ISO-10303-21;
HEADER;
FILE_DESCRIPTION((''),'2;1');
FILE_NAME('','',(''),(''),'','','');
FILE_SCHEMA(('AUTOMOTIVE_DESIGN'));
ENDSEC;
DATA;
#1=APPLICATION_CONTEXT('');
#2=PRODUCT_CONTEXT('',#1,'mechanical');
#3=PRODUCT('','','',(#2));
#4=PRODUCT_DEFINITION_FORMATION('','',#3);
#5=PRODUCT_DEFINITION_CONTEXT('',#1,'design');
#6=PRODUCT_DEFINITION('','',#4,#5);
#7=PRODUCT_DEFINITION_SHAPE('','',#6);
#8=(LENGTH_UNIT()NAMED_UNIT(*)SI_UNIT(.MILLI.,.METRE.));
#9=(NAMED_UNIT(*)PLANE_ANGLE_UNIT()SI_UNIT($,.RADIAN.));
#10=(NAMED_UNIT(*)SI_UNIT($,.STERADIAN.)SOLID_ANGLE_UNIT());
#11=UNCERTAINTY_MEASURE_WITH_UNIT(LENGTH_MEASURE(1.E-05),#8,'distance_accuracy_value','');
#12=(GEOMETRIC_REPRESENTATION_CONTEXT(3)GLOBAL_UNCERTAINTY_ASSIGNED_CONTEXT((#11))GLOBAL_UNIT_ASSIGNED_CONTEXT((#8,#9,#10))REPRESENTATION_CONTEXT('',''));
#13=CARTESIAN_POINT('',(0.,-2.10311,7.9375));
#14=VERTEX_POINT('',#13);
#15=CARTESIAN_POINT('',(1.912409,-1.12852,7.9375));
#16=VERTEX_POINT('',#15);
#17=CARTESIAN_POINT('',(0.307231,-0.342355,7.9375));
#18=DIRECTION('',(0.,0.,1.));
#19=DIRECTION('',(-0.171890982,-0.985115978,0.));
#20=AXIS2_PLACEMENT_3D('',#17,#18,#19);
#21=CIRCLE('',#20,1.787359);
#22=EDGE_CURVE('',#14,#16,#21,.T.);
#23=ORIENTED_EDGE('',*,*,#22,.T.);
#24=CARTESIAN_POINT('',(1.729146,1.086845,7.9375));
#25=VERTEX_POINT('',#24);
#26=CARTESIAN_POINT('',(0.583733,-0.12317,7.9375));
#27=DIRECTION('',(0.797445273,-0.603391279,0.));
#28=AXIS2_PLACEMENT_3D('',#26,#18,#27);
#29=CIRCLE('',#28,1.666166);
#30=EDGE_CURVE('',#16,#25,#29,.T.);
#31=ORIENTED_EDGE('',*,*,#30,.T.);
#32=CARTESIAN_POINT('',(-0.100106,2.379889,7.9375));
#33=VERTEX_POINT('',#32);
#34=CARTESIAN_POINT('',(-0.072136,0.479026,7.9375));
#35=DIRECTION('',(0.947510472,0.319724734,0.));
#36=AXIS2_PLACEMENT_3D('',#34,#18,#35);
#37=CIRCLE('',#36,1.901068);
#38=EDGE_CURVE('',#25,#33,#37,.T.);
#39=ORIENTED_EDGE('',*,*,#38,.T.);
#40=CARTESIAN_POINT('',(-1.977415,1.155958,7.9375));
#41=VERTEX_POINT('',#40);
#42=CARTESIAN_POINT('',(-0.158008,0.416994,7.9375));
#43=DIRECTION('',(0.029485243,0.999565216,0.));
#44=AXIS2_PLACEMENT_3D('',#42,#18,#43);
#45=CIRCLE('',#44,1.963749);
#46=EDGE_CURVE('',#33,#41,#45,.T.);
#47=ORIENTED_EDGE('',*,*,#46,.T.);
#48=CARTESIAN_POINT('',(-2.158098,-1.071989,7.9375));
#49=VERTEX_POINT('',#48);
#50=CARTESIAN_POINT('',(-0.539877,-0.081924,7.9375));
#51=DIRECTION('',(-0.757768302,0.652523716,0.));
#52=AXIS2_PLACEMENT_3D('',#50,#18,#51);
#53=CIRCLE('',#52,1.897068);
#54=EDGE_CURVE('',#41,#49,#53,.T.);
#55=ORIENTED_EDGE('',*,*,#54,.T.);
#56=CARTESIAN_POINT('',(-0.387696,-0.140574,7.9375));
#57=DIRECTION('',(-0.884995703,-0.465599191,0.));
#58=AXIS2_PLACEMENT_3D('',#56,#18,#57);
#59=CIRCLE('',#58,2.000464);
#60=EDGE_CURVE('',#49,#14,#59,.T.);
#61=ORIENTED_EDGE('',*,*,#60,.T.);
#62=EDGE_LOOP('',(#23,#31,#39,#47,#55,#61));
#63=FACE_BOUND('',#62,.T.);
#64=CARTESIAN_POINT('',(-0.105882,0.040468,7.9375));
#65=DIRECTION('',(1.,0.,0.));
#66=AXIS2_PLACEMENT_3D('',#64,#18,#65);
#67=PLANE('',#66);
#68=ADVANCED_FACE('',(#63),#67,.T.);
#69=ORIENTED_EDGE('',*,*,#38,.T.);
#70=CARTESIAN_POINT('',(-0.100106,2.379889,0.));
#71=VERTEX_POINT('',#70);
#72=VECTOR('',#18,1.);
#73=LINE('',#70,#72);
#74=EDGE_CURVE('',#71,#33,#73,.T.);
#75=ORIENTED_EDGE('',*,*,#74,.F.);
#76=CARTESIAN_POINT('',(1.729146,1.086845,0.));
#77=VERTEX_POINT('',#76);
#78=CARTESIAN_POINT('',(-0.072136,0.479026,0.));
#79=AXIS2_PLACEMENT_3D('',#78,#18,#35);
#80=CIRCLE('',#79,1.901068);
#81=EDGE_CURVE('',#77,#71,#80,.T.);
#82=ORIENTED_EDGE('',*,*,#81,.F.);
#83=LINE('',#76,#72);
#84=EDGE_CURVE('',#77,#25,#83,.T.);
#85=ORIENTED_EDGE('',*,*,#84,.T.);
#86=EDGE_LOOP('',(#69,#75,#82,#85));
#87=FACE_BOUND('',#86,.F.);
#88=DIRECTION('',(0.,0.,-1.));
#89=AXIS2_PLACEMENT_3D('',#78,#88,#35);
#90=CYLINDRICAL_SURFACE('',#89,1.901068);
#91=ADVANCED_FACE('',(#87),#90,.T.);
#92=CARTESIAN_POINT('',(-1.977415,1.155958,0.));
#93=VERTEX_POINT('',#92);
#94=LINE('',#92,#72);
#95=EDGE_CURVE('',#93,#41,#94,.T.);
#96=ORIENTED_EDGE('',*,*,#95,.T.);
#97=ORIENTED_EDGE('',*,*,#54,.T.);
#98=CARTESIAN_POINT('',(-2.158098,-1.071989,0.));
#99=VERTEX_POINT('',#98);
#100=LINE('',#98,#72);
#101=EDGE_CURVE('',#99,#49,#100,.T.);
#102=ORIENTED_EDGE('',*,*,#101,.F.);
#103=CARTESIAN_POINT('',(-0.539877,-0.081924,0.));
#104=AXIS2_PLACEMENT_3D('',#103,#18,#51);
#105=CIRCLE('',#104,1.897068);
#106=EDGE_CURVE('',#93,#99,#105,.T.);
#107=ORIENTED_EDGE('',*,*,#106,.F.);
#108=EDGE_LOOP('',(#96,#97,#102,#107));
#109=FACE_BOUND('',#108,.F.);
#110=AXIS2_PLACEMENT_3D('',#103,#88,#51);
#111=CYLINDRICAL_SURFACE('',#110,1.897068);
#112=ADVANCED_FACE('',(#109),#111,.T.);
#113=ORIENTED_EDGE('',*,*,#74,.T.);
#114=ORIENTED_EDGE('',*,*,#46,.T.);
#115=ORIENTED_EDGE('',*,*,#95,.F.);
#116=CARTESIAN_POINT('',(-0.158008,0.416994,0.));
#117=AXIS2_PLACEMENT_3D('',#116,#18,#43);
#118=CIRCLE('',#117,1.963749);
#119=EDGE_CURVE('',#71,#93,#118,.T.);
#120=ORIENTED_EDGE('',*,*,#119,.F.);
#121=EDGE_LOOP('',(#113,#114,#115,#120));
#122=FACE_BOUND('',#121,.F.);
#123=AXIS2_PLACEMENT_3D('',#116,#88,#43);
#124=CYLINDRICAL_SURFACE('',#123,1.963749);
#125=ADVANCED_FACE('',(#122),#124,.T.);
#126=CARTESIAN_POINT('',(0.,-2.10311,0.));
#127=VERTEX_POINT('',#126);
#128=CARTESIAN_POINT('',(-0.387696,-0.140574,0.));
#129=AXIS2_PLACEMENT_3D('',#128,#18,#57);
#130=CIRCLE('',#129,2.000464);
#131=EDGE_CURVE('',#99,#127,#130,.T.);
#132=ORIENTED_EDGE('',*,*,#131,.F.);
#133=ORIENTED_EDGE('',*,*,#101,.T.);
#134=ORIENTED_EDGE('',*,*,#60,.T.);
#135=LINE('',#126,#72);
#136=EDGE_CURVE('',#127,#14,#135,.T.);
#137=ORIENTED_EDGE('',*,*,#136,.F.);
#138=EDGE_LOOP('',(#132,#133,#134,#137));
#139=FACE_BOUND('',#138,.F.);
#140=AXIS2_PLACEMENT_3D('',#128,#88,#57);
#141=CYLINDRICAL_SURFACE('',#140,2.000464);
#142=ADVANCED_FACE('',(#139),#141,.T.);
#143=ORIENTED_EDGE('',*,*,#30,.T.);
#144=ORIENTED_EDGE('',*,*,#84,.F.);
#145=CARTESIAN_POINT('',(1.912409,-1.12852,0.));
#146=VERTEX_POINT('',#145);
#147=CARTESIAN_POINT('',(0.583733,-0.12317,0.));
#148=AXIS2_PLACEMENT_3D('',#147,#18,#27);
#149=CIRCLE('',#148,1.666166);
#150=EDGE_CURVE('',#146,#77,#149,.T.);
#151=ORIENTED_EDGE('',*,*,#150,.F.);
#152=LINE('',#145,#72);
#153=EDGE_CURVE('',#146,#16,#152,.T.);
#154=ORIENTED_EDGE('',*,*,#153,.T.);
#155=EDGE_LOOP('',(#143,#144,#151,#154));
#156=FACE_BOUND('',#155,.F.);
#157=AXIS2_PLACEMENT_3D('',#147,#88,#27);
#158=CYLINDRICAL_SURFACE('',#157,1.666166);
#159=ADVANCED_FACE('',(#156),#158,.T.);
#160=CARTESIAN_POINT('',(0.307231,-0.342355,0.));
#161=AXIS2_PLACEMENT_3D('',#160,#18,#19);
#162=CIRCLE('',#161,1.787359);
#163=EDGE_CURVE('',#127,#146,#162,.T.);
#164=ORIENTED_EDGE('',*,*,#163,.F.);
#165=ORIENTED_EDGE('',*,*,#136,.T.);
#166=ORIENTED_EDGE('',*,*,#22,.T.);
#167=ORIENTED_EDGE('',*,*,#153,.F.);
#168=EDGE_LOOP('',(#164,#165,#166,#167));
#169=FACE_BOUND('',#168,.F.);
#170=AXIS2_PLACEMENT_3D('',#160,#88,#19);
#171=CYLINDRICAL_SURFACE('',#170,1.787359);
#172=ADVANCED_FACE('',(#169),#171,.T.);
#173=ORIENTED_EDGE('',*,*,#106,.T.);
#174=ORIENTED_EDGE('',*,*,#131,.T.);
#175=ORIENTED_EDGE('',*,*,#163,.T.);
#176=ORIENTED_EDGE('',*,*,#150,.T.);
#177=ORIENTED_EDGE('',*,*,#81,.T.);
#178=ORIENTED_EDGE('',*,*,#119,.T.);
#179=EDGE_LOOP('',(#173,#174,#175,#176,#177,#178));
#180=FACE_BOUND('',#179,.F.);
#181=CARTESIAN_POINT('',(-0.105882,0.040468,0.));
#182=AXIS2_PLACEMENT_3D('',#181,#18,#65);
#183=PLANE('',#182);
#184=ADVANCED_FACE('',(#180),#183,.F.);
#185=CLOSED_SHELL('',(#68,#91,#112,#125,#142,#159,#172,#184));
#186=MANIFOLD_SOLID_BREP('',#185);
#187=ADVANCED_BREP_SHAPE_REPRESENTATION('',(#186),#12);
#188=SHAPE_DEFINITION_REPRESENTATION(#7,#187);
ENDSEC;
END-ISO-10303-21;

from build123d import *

# Parameters (mm, degrees)
F1_DEPTH = 7.9375


# Not quite as in the source:
# - a length typed as a fraction of an inch, garbled in the dataset ("3 / 203.2 mm" for 3/8 in), is restored


with BuildPart() as f1:
    # F0 (on Top) → F1 (new body)
    with BuildSketch(Plane.XY):
        with BuildLine():
            ThreePointArc((1.7291457625, 1.0868449463), (1.025201219, 2.031415161), (-0.1001062337, 2.3798889015))
            ThreePointArc((-0.1001062337, 2.3798889015), (-1.2304943591, 2.0620113015), (-1.9774150234, 1.155957769))
            ThreePointArc((-1.9774150234, 1.155957769), (-2.4307372074, 0.0714217097), (-2.1580981556, -1.0719887214))
            ThreePointArc((-2.1580981556, -1.0719887214), (-1.2501182209, -1.9455907072), (0, -2.1031103097))
            ThreePointArc((0, -2.1031103097), (1.1187867589, -1.9348458875), (1.9124085084, -1.1285201181))
            ThreePointArc((1.9124085084, -1.1285201181), (2.2442264135, 0.0141916193), (1.7291457625, 1.0868449463))
        make_face()
    extrude(amount=F1_DEPTH)


solid = f1.part
